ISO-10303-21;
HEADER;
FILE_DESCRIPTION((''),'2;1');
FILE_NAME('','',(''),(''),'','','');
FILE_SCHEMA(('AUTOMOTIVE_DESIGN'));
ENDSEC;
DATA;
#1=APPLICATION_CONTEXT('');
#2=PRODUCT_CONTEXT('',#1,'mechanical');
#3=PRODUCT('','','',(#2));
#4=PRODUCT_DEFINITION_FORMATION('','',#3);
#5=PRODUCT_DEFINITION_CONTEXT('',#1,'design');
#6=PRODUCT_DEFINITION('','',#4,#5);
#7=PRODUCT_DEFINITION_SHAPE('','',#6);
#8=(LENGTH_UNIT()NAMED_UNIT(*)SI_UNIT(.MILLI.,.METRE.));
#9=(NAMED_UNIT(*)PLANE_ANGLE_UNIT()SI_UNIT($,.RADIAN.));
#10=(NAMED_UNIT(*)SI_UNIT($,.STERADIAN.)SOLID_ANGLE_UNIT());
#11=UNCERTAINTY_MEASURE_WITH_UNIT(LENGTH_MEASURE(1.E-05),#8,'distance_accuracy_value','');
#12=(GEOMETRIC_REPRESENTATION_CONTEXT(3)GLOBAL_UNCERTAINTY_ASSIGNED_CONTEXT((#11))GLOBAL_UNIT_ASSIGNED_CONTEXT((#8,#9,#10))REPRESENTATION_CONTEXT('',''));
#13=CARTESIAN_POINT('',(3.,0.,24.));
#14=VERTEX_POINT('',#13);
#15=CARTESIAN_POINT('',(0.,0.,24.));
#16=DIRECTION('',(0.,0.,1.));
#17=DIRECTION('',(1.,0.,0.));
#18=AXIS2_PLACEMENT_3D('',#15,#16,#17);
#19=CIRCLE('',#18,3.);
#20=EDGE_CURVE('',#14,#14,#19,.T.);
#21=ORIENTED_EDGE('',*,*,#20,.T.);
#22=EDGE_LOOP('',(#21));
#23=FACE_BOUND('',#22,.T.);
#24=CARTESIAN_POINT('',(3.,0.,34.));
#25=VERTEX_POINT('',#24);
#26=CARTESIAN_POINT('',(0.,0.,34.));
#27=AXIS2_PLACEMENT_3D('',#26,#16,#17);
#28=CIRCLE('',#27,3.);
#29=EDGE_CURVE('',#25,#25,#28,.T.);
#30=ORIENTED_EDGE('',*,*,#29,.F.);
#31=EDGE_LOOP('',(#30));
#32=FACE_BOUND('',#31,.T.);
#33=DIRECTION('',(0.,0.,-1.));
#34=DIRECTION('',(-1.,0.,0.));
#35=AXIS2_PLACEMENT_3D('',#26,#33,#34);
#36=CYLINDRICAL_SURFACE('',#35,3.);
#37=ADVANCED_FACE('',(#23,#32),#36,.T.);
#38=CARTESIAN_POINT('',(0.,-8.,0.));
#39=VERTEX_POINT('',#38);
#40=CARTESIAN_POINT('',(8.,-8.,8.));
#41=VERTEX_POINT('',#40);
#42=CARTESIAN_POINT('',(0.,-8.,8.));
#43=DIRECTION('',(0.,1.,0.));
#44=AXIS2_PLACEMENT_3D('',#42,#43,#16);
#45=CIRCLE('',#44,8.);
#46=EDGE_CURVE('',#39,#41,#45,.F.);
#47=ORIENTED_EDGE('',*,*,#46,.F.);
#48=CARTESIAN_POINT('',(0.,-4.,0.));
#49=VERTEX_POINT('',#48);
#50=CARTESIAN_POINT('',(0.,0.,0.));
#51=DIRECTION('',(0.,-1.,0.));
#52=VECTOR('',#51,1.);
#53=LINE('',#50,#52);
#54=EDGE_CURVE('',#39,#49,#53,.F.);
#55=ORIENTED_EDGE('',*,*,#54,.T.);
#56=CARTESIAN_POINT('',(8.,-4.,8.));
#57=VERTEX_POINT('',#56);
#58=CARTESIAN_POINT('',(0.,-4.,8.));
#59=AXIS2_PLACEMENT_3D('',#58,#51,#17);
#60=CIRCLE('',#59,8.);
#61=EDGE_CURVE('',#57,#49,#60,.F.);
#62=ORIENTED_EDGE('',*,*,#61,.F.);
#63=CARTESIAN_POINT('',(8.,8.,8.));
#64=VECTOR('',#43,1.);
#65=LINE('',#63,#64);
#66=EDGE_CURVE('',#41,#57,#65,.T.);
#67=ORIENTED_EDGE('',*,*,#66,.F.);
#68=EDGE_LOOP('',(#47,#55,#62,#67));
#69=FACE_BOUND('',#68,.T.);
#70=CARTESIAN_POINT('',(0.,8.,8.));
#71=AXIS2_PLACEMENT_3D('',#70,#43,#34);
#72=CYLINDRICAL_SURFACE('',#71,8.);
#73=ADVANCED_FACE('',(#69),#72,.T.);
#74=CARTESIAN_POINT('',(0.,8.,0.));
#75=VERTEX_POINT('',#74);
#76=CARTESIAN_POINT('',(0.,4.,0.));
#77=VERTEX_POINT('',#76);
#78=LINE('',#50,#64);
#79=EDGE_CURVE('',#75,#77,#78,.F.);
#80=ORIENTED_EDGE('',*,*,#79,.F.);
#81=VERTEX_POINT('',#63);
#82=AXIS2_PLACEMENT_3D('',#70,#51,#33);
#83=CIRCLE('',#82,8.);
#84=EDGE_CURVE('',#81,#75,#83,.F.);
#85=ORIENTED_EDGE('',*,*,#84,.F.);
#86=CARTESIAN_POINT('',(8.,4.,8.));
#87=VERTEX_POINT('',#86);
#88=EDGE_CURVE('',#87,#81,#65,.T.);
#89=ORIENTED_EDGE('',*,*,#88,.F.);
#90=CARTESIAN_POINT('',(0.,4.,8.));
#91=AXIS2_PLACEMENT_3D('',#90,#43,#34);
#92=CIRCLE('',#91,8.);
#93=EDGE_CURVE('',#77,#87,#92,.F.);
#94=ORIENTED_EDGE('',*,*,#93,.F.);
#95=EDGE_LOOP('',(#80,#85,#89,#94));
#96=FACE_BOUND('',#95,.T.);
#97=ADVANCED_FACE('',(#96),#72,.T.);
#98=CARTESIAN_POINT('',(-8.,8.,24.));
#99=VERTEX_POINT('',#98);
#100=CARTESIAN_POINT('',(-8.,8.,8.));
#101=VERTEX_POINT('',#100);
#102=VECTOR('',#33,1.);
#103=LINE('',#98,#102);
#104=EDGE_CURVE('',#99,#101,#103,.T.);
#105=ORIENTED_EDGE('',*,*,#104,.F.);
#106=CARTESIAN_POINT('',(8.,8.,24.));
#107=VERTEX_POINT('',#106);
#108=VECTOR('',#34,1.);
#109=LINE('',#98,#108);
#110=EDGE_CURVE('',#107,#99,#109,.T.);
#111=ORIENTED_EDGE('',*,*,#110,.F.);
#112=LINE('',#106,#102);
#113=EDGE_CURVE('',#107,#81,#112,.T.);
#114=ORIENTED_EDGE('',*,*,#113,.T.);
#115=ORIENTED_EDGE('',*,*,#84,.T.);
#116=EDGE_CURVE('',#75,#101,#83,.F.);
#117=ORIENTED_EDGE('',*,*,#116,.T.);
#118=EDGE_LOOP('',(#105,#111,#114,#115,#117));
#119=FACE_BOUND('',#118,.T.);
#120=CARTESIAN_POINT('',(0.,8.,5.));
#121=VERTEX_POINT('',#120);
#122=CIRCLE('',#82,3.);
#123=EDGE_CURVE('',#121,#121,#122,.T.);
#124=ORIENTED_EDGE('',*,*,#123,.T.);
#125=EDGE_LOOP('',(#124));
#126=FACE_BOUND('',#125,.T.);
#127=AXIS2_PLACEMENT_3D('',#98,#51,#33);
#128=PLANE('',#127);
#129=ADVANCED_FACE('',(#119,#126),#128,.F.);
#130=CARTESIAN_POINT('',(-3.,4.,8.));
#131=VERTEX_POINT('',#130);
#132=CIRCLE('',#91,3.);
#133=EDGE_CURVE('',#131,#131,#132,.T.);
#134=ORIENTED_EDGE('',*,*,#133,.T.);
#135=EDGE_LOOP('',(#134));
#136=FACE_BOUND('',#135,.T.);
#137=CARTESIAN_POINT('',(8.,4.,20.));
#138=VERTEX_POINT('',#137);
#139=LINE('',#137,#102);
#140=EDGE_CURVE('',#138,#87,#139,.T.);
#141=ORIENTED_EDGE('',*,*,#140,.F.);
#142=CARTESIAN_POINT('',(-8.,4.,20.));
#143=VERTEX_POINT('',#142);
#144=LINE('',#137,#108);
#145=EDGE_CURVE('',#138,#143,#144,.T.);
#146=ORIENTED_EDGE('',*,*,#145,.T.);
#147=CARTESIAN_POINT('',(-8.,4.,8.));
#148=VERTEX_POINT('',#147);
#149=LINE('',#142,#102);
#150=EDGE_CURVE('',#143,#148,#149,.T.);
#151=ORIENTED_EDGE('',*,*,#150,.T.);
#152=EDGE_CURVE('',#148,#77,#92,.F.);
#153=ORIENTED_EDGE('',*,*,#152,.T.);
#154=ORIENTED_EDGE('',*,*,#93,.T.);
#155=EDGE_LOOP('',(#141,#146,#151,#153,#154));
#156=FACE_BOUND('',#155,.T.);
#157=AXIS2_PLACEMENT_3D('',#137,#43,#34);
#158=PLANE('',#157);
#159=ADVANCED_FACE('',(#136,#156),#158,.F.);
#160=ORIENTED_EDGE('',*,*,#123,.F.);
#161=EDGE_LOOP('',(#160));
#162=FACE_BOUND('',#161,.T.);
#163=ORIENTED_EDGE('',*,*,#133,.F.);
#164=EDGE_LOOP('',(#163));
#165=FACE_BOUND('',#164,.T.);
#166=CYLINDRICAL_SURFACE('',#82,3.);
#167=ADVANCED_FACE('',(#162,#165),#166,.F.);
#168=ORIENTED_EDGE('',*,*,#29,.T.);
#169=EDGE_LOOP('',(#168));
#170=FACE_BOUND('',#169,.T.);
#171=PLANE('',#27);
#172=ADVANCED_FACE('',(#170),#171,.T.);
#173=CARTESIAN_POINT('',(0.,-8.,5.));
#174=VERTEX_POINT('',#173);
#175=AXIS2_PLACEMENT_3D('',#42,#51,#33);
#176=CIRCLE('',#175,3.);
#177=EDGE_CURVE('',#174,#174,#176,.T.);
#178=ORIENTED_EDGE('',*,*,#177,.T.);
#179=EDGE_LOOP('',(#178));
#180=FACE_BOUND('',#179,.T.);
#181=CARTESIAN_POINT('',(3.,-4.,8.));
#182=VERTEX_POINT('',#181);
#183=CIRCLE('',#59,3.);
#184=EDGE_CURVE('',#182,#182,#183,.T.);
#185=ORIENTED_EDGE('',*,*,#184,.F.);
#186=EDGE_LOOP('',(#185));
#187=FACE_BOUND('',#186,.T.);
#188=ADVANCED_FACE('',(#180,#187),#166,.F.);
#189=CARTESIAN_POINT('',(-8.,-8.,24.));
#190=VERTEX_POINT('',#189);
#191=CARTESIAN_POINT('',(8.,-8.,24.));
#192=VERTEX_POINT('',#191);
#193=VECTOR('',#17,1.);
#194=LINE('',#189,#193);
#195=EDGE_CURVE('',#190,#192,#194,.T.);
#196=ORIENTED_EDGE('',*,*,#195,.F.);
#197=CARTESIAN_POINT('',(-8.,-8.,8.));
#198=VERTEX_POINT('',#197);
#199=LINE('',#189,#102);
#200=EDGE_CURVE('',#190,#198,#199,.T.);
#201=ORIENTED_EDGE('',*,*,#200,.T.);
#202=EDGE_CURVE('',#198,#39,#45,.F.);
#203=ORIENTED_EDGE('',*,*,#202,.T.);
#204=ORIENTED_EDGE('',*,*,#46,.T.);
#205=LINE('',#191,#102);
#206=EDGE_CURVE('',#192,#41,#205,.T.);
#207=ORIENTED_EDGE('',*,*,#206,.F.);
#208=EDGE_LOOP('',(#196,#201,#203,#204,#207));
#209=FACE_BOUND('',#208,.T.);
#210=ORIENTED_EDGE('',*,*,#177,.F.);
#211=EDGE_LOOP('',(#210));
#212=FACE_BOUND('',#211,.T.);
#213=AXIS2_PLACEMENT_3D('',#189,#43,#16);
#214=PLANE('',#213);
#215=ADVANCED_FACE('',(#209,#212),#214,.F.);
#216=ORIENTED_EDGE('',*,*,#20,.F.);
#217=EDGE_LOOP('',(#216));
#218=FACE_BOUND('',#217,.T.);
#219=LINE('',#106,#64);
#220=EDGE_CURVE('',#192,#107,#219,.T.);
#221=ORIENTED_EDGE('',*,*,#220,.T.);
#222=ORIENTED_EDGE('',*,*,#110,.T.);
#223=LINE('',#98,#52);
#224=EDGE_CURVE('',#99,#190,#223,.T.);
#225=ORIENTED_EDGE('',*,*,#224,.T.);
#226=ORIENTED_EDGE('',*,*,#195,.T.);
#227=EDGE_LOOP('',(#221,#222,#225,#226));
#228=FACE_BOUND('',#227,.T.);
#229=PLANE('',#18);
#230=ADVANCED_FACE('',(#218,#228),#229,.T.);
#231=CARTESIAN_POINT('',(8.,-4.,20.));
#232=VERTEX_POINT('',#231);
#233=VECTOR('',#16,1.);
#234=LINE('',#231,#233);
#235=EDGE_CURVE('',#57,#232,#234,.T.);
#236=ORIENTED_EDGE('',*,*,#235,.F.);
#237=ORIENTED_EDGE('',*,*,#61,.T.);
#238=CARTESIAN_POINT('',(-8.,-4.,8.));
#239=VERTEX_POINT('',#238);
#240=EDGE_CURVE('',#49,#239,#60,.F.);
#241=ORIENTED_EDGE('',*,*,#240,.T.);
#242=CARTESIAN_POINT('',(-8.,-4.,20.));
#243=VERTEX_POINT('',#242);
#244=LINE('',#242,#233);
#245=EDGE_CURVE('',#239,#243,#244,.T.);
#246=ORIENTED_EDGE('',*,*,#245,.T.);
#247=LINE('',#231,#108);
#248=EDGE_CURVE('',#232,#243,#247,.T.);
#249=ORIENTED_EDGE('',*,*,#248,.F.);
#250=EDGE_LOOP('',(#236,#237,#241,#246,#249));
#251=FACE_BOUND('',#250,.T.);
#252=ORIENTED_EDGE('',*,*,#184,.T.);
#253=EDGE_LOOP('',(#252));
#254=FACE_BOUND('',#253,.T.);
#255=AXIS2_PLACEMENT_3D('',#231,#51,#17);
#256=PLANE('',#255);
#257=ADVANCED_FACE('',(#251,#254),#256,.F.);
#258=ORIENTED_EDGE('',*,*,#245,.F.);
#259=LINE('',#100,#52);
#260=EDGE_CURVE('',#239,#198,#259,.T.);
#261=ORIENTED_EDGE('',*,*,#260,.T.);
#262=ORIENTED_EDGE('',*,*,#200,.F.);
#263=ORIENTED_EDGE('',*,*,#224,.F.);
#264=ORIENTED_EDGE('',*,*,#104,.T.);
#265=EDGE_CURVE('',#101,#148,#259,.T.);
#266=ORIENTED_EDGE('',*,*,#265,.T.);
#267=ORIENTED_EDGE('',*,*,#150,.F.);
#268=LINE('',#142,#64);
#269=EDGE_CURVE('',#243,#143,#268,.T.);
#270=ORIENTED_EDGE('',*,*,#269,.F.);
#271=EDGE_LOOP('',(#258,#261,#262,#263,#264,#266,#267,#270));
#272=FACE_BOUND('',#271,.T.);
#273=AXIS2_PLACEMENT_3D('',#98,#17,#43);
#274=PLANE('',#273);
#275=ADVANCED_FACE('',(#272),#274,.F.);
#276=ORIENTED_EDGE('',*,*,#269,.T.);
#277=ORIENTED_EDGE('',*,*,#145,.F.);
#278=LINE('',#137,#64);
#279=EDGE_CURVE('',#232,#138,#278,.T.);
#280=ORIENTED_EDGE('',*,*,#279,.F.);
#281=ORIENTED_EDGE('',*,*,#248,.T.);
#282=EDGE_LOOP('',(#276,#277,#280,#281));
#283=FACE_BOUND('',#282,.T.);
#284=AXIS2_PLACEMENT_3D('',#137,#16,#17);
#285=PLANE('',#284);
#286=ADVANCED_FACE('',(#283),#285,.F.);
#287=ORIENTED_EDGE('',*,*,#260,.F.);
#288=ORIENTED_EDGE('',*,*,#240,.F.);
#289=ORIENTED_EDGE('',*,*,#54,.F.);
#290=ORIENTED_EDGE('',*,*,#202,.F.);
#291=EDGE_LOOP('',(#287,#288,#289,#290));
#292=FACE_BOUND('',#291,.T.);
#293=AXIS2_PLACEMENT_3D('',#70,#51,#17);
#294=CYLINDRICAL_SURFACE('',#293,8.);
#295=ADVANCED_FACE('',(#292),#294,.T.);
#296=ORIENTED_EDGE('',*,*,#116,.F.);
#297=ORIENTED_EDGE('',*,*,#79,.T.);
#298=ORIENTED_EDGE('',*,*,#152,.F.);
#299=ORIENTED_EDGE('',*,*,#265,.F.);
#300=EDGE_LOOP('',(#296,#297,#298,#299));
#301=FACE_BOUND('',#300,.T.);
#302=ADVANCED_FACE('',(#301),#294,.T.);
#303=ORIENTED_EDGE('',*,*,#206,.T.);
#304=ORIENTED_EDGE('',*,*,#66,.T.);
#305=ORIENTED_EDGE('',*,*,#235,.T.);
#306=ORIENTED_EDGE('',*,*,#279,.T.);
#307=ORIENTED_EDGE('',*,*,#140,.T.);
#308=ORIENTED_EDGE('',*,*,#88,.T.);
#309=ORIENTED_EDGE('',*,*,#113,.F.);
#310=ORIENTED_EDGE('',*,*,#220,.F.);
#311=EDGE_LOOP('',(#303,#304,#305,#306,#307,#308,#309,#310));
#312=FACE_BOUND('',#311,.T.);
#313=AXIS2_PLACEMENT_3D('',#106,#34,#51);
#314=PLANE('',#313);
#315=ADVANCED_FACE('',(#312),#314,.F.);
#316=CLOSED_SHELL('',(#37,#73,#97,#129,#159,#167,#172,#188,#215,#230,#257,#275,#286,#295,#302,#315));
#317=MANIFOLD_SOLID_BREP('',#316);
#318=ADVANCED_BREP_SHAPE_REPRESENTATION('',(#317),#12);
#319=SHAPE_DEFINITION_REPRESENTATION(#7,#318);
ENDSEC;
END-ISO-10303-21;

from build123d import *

# Parameters (mm, degrees)
SKETCH1_W           = 16
SKETCH1_H           = 16
BOSS_EXTRUDE1_DEPTH = 24
SKETCH3_R           = 3
BOSS_EXTRUDE2_DEPTH = 10
SKETCH4_W           = 20
SKETCH4_H           = 8
CUT_EXTRUDE1_DEPTH  = 39.418745425
SKETCH5_R           = 3
CUT_EXTRUDE2_DEPTH  = 39.418745425
FILLET1_R           = 8


with BuildPart() as part:
    # Sketch1 → Boss-Extrude1 (new body)
    with BuildSketch(Plane.XY):
        Rectangle(SKETCH1_W, SKETCH1_H)
    extrude(amount=BOSS_EXTRUDE1_DEPTH)

    # Sketch3 → Boss-Extrude2 (add)
    with BuildSketch(Plane.XY.offset(24)):
        Circle(SKETCH3_R)
    extrude(amount=BOSS_EXTRUDE2_DEPTH)

    # Sketch4 → Cut-Extrude1 (cut, through all)
    with BuildSketch(Plane.ZY.offset(8)):
        with Locations((10, 0)):
            Rectangle(SKETCH4_W, SKETCH4_H)
    extrude(amount=-CUT_EXTRUDE1_DEPTH, mode=Mode.SUBTRACT)

    # Sketch5 → Cut-Extrude2 (cut, through all)
    with BuildSketch(Plane.XZ.offset(8)):
        with Locations(Location((0, 8, 0), (0, 0, 270))):
            Circle(SKETCH5_R)
    extrude(amount=-CUT_EXTRUDE2_DEPTH, mode=Mode.SUBTRACT)

    # Fillet1
    fillet1_edges = [part.edges().sort_by_distance(p)[0] for p in [
        (-8, 6, 0),
        (8, 6, 0),
        (8, -6, 0),
        (-8, -6, 0),
    ]]
    fillet(fillet1_edges, radius=FILLET1_R - 0.0001)  # a hair under: the kernel refuses the full size


solid = part.part
